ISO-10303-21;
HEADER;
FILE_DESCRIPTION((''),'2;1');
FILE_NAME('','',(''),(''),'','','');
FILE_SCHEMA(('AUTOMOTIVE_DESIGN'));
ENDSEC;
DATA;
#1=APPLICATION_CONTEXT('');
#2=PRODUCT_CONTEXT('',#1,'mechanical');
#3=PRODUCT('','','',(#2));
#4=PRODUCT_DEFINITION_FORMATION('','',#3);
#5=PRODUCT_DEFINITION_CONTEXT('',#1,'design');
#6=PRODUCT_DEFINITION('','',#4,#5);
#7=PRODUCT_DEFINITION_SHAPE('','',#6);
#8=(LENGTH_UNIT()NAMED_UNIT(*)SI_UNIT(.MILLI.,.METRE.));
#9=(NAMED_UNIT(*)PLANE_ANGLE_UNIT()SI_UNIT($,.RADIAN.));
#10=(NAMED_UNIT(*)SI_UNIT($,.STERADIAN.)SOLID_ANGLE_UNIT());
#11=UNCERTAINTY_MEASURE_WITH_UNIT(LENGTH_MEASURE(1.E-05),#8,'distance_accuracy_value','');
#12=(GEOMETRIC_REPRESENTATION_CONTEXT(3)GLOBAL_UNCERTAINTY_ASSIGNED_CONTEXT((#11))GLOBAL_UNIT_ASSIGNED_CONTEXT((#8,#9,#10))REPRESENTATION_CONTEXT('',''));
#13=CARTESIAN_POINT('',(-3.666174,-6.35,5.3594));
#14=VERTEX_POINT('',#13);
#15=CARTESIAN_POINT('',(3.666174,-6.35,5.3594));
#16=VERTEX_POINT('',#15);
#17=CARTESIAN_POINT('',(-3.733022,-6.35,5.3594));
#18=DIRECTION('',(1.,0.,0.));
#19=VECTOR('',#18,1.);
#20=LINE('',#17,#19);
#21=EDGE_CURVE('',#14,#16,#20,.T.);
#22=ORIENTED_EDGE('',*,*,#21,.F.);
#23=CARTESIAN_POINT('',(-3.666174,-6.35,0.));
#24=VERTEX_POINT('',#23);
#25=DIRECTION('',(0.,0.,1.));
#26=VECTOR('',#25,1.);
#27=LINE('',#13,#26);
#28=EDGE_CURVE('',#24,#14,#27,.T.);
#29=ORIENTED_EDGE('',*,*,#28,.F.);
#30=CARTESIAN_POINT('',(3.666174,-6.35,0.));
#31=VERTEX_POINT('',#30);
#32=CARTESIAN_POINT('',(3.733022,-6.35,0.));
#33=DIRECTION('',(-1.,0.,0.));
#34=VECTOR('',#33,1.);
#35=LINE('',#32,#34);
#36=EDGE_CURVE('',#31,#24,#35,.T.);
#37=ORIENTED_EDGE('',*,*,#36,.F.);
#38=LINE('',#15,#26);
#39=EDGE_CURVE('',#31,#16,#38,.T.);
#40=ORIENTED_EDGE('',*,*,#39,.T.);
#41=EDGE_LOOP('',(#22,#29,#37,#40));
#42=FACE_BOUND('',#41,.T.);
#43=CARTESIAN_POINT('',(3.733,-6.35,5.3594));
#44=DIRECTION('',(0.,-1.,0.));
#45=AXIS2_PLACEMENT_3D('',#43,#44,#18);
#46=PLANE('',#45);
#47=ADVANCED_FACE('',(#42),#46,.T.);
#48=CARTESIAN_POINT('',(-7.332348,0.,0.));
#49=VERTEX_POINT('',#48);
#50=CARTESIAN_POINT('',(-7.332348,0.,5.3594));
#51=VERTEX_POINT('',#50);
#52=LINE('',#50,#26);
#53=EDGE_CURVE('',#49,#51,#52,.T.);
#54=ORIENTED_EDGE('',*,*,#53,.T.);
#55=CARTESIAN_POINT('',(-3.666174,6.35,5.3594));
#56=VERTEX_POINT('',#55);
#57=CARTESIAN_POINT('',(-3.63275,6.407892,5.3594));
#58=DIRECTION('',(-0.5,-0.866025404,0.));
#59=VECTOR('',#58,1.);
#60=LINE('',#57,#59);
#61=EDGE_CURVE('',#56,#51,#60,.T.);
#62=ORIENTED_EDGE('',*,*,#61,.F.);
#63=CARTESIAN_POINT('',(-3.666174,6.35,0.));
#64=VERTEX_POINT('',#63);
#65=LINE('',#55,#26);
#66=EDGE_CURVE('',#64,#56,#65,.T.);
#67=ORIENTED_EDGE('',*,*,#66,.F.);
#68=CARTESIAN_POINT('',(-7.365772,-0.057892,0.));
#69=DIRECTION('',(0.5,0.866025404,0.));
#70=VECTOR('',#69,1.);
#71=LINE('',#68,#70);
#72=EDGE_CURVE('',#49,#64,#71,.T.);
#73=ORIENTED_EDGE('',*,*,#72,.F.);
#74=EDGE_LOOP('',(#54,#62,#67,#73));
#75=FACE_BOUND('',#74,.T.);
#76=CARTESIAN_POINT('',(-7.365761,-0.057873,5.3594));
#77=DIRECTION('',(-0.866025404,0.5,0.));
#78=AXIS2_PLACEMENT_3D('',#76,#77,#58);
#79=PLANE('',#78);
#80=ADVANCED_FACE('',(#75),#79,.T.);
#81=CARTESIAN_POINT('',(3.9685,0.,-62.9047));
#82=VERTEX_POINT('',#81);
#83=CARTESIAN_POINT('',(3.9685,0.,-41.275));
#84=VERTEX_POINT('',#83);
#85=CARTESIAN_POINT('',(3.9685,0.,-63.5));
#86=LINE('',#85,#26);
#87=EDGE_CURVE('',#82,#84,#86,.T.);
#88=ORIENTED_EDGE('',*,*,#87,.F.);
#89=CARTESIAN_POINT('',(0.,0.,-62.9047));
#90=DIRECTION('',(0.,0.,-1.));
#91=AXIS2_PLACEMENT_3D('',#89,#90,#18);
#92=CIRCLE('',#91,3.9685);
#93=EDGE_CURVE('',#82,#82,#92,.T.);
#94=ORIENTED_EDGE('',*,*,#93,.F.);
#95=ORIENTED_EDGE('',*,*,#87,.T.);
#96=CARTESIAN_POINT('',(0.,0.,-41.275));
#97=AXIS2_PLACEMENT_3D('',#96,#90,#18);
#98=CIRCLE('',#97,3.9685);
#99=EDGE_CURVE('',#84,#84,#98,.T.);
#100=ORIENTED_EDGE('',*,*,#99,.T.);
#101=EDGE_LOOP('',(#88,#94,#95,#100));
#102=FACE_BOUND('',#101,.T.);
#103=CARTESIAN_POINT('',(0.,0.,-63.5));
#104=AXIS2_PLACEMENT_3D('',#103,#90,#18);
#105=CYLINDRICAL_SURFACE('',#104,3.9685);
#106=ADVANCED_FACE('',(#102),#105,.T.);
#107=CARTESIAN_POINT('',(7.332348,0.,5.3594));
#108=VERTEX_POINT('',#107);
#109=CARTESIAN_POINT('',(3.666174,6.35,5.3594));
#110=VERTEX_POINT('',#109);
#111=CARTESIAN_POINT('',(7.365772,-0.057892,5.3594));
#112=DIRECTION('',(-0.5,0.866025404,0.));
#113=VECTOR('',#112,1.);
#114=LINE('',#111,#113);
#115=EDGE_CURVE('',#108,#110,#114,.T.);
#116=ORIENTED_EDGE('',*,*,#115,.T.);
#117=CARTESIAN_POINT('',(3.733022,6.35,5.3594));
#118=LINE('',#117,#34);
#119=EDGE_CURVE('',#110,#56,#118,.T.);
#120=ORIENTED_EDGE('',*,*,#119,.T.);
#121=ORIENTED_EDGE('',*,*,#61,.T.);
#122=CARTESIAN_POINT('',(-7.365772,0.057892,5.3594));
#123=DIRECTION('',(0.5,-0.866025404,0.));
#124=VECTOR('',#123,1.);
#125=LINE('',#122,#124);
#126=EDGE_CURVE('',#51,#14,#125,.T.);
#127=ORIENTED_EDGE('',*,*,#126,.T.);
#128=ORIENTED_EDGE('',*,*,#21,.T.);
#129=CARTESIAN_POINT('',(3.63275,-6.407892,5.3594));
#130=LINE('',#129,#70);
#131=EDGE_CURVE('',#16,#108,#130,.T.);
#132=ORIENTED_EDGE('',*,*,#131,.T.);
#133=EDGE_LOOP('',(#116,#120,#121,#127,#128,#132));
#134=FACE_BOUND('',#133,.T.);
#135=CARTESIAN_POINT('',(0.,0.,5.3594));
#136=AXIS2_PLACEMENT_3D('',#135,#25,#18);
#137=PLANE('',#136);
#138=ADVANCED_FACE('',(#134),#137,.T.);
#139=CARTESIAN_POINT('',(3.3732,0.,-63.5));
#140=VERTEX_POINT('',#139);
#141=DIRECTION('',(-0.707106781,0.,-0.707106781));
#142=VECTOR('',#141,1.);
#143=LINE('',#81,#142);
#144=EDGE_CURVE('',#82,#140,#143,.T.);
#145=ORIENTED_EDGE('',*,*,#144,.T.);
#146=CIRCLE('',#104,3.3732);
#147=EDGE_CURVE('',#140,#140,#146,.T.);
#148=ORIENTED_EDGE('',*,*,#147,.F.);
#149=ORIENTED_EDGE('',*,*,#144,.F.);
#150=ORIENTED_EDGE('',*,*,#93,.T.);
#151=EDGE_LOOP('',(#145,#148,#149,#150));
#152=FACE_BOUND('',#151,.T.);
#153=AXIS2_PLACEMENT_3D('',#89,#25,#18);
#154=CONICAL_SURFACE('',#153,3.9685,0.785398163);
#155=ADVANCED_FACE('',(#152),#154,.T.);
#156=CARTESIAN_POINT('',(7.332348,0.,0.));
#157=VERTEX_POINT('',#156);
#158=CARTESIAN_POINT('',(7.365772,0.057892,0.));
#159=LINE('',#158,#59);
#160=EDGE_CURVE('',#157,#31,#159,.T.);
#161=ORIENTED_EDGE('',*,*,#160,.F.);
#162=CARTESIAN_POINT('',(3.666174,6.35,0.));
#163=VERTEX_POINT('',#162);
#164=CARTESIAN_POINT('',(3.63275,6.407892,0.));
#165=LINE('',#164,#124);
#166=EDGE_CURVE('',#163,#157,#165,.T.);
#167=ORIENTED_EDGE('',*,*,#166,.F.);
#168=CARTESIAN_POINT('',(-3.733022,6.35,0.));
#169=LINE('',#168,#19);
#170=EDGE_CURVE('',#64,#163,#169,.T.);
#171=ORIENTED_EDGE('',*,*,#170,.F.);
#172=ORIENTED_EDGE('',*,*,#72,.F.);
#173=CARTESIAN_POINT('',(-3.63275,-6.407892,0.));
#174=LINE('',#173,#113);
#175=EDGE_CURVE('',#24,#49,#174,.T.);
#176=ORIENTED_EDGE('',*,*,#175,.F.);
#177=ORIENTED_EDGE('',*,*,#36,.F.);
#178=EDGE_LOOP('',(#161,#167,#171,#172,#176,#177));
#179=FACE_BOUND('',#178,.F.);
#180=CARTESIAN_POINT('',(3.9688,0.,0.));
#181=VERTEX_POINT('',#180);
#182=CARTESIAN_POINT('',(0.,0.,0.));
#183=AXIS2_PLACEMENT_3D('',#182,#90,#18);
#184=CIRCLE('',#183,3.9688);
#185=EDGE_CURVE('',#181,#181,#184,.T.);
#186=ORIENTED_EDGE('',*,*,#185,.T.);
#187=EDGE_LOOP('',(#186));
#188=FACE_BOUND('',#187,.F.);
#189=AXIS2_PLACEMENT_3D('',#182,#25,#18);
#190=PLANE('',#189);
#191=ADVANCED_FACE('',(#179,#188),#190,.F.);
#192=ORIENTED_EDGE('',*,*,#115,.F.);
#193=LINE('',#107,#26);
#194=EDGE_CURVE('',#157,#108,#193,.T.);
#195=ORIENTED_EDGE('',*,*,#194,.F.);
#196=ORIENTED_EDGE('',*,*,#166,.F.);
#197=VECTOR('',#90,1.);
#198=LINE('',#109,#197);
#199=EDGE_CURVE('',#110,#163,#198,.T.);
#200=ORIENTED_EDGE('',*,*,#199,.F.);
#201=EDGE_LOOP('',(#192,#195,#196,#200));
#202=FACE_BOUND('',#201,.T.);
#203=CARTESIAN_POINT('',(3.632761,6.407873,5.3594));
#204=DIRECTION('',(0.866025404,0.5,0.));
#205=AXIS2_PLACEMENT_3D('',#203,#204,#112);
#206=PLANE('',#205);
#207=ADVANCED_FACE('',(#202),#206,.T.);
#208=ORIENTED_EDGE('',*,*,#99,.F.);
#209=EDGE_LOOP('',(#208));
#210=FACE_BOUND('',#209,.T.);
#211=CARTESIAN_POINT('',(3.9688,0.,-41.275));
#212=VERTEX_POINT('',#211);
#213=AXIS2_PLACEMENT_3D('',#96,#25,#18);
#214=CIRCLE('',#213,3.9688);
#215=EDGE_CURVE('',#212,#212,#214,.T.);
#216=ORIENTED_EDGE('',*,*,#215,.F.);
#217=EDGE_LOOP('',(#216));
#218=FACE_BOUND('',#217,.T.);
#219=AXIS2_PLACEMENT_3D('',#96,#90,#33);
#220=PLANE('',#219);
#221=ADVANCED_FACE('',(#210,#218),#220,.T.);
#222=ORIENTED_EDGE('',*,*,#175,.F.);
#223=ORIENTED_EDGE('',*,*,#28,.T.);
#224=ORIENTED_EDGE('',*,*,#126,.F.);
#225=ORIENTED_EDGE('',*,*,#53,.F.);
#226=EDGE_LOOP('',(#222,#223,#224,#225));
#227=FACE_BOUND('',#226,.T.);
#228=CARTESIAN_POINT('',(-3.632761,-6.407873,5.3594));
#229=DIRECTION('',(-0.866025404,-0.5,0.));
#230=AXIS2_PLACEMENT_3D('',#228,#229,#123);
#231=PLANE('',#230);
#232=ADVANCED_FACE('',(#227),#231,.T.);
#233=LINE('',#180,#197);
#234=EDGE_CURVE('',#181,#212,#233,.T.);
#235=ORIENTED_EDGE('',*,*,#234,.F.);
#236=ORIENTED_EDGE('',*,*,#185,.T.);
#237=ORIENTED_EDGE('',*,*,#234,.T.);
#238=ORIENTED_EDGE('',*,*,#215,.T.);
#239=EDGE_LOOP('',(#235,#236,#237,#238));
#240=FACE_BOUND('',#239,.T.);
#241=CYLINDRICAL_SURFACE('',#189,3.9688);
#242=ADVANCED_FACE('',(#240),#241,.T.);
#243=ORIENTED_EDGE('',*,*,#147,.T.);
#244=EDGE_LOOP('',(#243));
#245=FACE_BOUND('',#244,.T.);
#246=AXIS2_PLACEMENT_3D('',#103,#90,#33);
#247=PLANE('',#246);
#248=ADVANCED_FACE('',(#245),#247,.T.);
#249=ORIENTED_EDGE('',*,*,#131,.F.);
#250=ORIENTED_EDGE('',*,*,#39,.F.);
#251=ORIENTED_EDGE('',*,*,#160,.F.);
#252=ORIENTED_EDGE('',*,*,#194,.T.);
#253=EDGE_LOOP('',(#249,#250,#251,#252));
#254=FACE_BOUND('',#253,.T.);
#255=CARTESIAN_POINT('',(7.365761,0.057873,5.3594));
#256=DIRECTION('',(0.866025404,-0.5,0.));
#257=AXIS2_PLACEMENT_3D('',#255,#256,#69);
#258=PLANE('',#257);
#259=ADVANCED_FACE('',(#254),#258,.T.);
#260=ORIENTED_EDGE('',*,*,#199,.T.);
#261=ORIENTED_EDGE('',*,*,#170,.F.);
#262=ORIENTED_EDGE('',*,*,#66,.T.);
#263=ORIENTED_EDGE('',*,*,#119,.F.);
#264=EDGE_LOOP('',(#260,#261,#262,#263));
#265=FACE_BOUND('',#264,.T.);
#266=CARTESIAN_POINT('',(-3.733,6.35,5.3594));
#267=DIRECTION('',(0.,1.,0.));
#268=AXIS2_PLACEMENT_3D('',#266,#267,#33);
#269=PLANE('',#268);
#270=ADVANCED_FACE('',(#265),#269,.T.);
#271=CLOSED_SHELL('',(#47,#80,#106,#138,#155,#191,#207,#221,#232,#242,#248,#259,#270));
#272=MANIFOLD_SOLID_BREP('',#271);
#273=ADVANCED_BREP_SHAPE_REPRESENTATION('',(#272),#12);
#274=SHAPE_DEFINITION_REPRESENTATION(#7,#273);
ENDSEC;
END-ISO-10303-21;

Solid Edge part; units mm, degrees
sketch "Sketch1" plane through (0, 0, 0) normal (0, 0, 1) x (1, 0, 0)
  circle A0 centre (0, 0) radius 7.366
  dimension "D1" = 14.732
extrude "Protrusion1" add sketch "Sketch1" along normal blind 5.3594
sketch "Sketch2" plane through (0, 0, 0) normal (0, 0, -1) x (1, 0, 0)
  circle A0 centre (0, 0) radius 3.9688
extrude "Protrusion2" add sketch "Sketch2" along normal blind 63.5
sketch "Sketch3" plane through (0, 0, -63.5) normal (0, 0, -1) x (1, 0, 0)
  circle A0 centre (0, 0) radius 3.9685
extrude "Cutout1" cut sketch "Sketch3" against normal blind 22.225 flip side to cut
chamfer "Chamfer_1" distance 0.5953 angle 45 1 edges at (-3.9685, 0, -63.5)
sketch "Sketch4" plane through (0, 0, 5.3594) normal (0, 0, 1) x (1, 0, 0)
  line L0 (-3.733, 6.35) -> (3.733, 6.35)
  dimension "D1" = 12.7
extrude "Cutout2" cut sketch "Sketch4" against normal up to next material side at (0, 6.4, 5.3594)
pattern_circular "Pattern1" count 6 over 360 about axis through (0, 0, 5.3594) along (0, 0, 1) of "Cutout2"
properties part number "24100011"
